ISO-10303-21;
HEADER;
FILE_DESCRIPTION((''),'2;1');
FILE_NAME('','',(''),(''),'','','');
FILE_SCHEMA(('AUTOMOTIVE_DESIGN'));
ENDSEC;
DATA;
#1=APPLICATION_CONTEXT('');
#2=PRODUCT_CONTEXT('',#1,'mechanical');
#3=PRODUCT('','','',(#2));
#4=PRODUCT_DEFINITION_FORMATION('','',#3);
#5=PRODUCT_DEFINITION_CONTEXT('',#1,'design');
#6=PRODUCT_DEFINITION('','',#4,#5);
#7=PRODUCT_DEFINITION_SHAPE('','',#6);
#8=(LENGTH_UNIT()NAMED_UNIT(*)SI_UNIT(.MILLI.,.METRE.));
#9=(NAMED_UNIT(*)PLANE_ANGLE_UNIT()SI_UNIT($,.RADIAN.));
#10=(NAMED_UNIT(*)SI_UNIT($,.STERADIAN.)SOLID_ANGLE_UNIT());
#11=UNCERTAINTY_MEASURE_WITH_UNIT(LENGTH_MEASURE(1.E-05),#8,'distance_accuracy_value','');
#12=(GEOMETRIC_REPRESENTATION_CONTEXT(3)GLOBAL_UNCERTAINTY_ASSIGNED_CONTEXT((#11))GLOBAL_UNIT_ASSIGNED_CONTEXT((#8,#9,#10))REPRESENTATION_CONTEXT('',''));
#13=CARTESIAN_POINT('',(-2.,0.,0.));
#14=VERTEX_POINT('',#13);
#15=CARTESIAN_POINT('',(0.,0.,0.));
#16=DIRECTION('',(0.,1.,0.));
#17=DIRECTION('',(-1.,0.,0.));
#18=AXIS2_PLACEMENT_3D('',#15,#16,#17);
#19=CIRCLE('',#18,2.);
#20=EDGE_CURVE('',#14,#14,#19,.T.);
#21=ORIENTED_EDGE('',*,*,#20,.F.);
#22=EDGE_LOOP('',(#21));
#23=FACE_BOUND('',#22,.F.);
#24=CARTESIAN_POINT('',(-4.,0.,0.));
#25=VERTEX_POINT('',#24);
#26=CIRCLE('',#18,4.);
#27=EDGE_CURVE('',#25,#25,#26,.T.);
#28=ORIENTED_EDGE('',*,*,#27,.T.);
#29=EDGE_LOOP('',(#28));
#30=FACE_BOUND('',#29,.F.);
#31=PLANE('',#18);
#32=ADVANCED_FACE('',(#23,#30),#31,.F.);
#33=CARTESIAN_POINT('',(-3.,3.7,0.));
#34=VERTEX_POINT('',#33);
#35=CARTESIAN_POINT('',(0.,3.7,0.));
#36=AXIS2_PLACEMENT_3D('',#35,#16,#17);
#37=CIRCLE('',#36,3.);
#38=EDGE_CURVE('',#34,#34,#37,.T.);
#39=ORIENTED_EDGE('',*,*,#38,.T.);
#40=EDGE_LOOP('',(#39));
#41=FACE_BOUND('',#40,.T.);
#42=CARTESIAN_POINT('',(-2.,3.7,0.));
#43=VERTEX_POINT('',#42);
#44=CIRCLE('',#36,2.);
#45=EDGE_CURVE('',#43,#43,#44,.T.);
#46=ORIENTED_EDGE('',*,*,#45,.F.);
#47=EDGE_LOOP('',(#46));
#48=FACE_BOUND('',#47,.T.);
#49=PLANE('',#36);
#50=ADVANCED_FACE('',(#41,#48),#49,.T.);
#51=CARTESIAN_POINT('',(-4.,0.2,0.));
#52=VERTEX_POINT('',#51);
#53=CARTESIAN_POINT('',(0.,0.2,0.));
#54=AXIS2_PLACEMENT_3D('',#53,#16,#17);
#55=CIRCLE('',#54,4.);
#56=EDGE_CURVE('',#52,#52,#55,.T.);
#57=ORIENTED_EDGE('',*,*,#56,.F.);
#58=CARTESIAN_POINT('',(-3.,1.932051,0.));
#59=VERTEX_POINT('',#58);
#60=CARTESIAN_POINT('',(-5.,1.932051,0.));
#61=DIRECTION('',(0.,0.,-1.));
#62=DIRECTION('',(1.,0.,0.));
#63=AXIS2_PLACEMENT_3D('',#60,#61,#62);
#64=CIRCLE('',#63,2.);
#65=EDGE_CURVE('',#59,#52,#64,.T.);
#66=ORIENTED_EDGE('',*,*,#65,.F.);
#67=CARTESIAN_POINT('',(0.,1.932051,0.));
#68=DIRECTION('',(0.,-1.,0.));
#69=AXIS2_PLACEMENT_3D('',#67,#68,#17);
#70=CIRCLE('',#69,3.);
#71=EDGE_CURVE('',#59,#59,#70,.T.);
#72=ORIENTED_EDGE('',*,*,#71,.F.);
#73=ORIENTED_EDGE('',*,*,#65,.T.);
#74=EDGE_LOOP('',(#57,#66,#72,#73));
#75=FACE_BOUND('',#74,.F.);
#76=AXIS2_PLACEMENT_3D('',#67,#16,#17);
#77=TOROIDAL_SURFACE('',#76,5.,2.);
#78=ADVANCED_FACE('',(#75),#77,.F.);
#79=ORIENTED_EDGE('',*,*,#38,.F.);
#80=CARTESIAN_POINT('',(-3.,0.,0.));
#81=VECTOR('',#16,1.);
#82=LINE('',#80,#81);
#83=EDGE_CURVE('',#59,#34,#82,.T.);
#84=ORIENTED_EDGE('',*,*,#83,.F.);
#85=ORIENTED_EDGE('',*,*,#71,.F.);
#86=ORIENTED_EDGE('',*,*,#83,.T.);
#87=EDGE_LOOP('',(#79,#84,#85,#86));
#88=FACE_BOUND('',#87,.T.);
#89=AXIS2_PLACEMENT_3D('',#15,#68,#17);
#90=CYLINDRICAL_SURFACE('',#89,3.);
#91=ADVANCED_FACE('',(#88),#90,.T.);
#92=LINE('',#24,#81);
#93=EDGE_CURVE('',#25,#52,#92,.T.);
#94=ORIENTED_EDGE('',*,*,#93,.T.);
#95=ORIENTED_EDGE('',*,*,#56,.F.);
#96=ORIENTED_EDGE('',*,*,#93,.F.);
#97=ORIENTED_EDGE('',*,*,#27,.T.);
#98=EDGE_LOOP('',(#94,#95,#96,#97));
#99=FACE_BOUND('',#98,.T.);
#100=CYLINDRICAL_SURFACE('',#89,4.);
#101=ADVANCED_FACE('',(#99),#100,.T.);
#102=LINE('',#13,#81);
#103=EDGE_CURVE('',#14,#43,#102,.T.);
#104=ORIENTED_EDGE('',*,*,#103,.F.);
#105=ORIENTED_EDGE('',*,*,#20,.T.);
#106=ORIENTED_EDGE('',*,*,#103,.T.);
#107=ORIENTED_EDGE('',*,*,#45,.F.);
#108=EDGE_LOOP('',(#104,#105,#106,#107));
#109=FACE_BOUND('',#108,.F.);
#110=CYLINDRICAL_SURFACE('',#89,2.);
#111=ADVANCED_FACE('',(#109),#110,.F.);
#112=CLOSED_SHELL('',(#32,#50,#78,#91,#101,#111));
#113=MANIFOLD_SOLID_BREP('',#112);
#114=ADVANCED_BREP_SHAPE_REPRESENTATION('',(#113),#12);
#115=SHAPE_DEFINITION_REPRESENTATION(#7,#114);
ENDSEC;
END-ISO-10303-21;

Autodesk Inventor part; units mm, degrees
ref_plane "YZ Plane" through (0, 0, 0) normal (1, 0, 0) x (0, 1, 0)
ref_plane "XZ Plane" through (0, 0, 0) normal (0, 1, 0) x (-1, 0, 0)
ref_plane "XY Plane" through (0, 0, 0) normal (0, 0, 1) x (1, 0, 0)
sketch "Sketch1" plane through (0, 0, 0) normal (0, 1, 0) x (-1, 0, 0)
  circle A0 centre (0, 0) radius 2
  circle A1 centre (0, 0) radius 3
  circle A2 centre (0, 0) radius 4
  dimension "d0" = 4
  dimension "d1" = 6
  dimension "d2" = 8
extrude "Extrusion1" add sketch "Sketch1" along normal blind 0.2 contours A1 | A2
extrude "Extrusion2" add sketch "Sketch1" along normal blind 3.7 contours A1
fillet "Fillet1" radius 2 1 edges at (3, 0.2, 0)
properties part number "replacement standoff"
